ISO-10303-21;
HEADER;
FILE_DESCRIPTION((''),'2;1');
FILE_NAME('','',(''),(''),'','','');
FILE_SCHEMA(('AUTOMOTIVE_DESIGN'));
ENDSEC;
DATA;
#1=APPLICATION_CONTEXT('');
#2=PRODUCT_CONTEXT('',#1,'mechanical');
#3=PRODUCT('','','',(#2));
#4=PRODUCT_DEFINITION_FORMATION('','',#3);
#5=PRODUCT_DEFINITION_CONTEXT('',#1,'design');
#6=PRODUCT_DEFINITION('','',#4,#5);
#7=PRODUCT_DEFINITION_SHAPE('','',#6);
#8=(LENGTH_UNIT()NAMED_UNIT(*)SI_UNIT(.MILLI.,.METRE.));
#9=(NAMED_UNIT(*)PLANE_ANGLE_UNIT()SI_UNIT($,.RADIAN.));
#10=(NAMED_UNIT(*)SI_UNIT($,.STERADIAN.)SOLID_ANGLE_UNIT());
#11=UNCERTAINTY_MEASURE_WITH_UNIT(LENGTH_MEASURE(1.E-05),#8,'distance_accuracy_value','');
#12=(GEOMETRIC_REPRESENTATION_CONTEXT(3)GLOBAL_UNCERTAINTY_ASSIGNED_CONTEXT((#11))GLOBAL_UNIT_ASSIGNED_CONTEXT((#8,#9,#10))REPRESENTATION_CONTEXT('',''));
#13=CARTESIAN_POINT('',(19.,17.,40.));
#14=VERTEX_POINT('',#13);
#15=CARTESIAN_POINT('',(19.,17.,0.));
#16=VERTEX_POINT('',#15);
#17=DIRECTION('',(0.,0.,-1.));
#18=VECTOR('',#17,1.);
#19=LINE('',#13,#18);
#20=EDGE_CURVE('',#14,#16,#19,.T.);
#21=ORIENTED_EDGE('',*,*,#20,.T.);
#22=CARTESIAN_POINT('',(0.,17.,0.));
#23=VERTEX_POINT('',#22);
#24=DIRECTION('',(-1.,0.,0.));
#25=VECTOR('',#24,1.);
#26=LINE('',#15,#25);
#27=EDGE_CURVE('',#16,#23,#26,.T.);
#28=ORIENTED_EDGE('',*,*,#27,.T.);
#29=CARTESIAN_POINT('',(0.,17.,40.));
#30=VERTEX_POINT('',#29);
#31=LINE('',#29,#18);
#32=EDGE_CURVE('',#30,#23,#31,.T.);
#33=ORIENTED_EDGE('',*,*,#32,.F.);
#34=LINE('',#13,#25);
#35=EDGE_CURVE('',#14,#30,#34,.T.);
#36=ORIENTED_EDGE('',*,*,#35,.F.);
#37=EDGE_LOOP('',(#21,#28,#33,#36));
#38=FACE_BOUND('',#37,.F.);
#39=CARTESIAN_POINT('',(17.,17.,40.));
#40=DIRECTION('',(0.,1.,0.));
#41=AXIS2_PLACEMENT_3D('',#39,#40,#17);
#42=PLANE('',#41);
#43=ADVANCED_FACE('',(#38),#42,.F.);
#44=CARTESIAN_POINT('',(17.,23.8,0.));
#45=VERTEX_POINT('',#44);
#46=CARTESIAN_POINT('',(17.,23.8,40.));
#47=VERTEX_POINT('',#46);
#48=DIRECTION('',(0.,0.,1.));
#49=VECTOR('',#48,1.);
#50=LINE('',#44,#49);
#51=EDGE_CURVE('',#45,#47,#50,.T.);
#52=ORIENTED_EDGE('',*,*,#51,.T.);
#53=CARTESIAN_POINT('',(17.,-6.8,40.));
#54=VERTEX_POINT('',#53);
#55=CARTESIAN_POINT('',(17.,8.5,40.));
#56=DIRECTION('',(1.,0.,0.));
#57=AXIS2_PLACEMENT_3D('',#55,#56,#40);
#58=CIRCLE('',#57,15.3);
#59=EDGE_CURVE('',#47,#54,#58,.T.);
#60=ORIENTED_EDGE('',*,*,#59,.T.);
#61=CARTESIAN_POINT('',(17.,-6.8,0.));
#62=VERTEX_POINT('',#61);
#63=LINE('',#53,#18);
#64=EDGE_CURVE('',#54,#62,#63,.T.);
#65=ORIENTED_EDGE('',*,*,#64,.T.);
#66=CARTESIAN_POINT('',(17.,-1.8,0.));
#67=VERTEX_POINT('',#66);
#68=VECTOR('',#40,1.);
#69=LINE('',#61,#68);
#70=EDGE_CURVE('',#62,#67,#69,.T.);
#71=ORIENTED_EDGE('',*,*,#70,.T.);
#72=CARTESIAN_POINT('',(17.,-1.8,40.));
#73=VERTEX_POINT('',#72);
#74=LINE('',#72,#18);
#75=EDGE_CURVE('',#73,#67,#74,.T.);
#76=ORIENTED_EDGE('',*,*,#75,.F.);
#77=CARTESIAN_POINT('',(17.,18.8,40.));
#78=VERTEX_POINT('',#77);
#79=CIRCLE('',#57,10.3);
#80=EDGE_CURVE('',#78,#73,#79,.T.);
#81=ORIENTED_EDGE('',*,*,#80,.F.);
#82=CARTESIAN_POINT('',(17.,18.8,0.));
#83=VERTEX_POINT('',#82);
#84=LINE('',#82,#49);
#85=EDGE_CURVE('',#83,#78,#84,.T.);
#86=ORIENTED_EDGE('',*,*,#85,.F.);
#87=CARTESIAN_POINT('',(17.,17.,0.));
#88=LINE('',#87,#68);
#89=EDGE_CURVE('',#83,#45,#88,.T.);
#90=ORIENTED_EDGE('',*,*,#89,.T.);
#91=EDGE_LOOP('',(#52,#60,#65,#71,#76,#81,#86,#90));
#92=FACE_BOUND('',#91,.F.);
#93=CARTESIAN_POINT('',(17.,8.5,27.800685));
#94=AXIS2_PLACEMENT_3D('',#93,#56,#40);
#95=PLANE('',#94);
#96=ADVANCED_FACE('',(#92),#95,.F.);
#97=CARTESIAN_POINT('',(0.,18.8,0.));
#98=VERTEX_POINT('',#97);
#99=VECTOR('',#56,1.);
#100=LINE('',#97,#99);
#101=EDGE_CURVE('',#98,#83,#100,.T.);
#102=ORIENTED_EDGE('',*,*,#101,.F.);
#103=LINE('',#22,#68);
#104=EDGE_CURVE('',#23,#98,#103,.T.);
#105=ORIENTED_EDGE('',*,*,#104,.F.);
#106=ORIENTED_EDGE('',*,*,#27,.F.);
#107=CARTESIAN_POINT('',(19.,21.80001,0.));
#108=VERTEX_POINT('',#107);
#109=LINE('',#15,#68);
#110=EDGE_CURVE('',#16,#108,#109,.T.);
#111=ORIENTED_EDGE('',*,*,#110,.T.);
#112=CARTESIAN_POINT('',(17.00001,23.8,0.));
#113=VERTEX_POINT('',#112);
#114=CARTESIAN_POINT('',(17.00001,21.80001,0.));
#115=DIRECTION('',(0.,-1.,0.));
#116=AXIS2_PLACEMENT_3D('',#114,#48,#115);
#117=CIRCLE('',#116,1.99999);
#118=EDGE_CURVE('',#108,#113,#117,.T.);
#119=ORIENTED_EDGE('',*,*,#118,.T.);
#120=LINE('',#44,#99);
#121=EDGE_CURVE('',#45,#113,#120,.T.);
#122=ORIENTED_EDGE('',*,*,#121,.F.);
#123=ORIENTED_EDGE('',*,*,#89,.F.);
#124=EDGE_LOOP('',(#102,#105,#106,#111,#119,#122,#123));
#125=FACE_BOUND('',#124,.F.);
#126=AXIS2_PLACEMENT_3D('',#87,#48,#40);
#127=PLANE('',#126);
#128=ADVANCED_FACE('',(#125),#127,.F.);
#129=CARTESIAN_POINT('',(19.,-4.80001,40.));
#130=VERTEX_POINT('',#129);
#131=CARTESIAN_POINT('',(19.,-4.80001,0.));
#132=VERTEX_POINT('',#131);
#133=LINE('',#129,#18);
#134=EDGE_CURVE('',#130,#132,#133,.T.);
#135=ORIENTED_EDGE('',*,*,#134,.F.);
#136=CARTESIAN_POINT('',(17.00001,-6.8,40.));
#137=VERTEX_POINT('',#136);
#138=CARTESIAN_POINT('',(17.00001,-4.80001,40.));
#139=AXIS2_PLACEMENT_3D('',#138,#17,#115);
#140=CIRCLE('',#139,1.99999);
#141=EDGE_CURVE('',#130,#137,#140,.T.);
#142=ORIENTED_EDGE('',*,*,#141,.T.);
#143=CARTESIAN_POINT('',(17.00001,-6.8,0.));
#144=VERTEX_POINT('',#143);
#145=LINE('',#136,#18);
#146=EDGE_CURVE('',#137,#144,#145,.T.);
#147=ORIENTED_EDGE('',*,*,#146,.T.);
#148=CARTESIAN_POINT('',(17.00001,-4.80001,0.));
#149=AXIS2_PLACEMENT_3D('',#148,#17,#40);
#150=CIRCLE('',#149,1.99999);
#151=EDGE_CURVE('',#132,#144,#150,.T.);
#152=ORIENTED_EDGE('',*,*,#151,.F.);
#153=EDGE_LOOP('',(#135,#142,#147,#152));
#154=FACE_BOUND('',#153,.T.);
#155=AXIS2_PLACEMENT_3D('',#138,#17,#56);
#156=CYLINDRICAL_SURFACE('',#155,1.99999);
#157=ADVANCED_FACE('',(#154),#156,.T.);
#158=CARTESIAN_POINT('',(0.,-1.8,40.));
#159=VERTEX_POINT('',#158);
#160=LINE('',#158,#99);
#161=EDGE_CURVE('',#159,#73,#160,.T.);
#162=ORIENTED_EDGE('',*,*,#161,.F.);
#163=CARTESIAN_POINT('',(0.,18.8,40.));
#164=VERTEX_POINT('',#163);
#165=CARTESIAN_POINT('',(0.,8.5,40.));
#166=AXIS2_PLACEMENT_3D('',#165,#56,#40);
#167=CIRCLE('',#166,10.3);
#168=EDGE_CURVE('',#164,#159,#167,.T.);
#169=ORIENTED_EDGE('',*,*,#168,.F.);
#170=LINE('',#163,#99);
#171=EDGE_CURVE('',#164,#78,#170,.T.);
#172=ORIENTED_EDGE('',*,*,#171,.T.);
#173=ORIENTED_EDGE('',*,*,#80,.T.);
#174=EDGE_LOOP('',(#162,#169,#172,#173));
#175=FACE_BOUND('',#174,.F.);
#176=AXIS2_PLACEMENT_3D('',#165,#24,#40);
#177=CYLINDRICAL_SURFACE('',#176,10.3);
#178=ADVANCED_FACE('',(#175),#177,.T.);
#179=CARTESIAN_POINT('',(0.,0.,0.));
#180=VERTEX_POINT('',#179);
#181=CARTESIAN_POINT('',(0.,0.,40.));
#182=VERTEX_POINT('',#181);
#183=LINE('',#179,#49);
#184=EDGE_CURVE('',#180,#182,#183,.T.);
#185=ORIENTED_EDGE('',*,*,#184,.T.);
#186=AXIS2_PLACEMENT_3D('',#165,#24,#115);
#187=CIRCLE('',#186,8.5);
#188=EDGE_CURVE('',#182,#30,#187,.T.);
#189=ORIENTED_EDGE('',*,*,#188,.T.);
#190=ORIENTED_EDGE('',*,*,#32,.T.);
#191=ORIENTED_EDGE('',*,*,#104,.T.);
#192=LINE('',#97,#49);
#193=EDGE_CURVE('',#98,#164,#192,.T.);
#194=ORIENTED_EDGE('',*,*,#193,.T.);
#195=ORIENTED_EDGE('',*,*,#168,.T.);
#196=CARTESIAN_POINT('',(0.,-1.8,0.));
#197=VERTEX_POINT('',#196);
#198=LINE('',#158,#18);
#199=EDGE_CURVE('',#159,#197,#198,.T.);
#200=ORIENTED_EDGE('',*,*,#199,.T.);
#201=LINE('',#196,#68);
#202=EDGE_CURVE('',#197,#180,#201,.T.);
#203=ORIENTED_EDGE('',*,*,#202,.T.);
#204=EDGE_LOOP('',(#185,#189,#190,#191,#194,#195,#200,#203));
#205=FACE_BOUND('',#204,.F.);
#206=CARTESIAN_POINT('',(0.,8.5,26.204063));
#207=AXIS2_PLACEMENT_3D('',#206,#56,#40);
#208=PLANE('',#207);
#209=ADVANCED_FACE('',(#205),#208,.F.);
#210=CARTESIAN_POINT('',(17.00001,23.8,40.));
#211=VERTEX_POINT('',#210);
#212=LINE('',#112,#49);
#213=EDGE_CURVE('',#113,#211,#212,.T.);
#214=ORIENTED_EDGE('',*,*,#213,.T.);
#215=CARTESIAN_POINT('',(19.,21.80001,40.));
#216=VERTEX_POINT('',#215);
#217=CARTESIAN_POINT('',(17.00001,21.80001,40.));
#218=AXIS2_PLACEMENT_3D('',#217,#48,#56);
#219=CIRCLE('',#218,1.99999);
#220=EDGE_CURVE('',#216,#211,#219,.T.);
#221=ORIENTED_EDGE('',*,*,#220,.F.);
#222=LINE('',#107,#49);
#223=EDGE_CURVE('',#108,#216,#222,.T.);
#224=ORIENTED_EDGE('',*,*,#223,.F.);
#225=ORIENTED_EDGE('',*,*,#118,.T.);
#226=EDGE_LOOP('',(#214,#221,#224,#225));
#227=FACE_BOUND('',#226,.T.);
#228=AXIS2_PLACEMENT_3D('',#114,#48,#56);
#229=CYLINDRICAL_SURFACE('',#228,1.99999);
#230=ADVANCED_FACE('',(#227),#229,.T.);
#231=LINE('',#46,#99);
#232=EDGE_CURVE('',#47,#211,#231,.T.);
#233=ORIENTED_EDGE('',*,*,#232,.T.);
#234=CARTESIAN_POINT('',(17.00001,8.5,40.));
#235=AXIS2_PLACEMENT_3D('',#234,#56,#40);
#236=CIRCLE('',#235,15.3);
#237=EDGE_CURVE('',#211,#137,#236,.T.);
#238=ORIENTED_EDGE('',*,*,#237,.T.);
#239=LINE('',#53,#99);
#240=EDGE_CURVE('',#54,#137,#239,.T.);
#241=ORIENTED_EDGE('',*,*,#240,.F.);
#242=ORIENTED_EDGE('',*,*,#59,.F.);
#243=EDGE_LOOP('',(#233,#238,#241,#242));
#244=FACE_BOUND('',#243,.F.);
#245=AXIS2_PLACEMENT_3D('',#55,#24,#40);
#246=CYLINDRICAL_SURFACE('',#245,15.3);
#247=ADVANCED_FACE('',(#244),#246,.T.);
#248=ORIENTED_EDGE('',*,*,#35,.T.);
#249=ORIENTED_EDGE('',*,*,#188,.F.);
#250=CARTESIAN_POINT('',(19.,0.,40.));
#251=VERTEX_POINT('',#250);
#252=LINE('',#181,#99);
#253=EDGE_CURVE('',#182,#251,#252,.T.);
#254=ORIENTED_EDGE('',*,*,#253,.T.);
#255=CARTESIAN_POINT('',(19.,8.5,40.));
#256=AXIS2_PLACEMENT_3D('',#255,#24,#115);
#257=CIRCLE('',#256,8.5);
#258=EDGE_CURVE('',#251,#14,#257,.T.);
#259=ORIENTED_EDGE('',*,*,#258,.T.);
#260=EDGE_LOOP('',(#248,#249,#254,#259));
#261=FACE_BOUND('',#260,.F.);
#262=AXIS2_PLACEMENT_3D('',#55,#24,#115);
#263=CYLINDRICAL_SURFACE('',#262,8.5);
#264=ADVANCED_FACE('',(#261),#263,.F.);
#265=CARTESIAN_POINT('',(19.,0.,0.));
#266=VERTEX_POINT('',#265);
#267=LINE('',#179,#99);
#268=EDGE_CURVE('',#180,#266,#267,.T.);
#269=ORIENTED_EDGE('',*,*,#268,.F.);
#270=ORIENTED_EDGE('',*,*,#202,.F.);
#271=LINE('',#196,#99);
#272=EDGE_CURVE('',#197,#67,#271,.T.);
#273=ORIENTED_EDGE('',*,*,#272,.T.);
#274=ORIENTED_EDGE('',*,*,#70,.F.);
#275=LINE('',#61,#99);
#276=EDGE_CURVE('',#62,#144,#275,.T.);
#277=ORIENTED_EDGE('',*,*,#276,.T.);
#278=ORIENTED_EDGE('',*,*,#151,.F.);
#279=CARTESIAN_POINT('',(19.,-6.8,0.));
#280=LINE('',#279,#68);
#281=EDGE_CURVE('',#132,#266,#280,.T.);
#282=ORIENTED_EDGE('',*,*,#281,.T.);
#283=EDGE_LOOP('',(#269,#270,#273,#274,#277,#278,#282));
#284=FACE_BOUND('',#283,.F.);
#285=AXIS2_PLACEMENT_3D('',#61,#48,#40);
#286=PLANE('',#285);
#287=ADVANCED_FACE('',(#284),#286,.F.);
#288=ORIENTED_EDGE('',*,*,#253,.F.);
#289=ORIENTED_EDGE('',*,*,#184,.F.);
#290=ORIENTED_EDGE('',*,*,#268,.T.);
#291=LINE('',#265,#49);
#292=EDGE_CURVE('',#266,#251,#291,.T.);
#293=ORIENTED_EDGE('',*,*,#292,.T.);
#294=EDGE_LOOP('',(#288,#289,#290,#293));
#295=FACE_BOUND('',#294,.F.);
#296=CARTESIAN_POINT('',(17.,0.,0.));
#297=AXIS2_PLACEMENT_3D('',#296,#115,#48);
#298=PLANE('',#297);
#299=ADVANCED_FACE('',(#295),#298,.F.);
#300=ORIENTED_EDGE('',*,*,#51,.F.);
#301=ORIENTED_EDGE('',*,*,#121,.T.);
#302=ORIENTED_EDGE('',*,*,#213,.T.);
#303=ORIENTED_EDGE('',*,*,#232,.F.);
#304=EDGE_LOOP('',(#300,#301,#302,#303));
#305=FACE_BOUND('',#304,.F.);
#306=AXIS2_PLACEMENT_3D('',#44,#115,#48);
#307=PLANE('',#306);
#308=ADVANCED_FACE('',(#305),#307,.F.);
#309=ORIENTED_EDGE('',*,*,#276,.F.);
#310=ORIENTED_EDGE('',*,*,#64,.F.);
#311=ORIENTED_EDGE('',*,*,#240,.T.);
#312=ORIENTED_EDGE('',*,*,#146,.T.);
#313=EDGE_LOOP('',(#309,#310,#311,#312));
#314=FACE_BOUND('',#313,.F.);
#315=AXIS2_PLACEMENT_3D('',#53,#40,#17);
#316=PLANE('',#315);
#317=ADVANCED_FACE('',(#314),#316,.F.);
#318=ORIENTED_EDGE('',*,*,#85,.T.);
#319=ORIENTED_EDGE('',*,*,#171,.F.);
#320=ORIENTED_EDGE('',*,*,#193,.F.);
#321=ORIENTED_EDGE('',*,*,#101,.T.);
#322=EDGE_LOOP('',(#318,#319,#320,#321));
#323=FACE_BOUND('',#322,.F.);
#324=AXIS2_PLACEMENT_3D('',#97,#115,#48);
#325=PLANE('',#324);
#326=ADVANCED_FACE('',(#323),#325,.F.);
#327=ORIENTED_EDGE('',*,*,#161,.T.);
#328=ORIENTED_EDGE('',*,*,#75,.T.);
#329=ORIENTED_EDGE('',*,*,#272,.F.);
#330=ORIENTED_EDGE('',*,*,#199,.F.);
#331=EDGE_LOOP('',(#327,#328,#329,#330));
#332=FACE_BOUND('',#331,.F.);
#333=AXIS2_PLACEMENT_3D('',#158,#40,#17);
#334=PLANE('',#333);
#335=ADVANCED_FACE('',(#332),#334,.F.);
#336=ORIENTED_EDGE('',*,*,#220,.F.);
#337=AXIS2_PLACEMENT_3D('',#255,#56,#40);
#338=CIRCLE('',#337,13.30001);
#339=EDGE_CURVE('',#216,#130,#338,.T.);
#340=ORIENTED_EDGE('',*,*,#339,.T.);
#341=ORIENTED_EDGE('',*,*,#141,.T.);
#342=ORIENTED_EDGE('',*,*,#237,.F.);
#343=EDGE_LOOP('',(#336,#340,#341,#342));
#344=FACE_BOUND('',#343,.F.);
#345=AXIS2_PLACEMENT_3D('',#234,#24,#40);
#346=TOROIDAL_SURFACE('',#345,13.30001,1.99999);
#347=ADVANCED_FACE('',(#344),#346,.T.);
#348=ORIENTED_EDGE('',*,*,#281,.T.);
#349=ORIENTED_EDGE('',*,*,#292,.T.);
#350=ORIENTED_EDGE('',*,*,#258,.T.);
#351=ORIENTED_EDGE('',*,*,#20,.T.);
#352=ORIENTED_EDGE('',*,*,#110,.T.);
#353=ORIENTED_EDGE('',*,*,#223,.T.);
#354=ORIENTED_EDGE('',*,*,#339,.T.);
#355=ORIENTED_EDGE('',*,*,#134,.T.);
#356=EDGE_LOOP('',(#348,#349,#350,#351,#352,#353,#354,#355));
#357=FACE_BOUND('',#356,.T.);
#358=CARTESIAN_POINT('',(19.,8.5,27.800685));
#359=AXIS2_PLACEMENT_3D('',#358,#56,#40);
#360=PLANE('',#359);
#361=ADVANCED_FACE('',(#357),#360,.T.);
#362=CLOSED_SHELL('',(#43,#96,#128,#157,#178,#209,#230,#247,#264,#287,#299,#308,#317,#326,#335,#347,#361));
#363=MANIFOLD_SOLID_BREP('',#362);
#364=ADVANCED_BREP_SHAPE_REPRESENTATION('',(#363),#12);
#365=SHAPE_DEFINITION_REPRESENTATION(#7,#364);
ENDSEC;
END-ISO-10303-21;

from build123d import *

# Parameters (mm, degrees)
F1_DEPTH = 17
F3_DEPTH = 2
F4_R     = 1.99999


# Not quite as in the source:
# - a fillet or chamfer is up to 0.001 mm smaller than in the source, because OpenCascade refuses the exact size
# - a feature of the source that left no trace in its solid (it failed there, or was rolled back) is left out


with BuildPart() as f1:
    # F0 (on Right) → F1 (new body)
    with BuildSketch(Plane.YZ):
        with BuildLine():
            Line((-1.8, 0), (0, 0))
            Line((0, 0), (0, 40))
            ThreePointArc((0, 40), (8.5, 48.5), (17, 40))
            Line((17, 40), (17, 0))
            Line((17, 0), (18.8, 0))
            Line((18.8, 0), (18.8, 40))
            ThreePointArc((18.8, 40), (8.5, 50.3), (-1.8, 40))
            Line((-1.8, 40), (-1.8, 0))
        make_face()
    extrude(amount=F1_DEPTH)

    # F2 (on face) → F3 (join)
    with BuildSketch(Plane.YZ.offset(17)):
        with BuildLine():
            ThreePointArc((-1.8, 40), (8.5, 50.3), (18.8, 40))
            Line((18.8, 40), (18.8, 0))
            Line((18.8, 0), (23.8, 0))
            Line((23.8, 0), (23.8, 40))
            ThreePointArc((23.8, 40), (8.5, 55.3), (-6.8, 40))
            Line((-6.8, 40), (-6.8, 0))
            Line((-6.8, 0), (-1.8, 0))
            Line((-1.8, 0), (-1.8, 40))
        make_face()
        with BuildLine():
            Line((18.8, 0), (18.8, 40))
            ThreePointArc((18.8, 40), (8.5, 50.3), (-1.8, 40))
            Line((-1.8, 40), (-1.8, 0))
            Line((-1.8, 0), (0, 0))
            Line((0, 0), (0, 40))
            ThreePointArc((0, 40), (8.5, 48.5), (17, 40))
            Line((17, 40), (17, 0))
            Line((17, 0), (18.8, 0))
        make_face()
    extrude(amount=F3_DEPTH)

    # F4 (radius 2 in the source; OpenCascade refuses exactly that, so slightly less here)
    f4_edges = [f1.edges().sort_by_distance(p)[0] for p in [
        (19, -6.8, 20),
        (19, 8.5, 55.3),
        (19, 23.8, 20),
    ]]
    fillet(f4_edges, radius=F4_R)


solid = f1.part
